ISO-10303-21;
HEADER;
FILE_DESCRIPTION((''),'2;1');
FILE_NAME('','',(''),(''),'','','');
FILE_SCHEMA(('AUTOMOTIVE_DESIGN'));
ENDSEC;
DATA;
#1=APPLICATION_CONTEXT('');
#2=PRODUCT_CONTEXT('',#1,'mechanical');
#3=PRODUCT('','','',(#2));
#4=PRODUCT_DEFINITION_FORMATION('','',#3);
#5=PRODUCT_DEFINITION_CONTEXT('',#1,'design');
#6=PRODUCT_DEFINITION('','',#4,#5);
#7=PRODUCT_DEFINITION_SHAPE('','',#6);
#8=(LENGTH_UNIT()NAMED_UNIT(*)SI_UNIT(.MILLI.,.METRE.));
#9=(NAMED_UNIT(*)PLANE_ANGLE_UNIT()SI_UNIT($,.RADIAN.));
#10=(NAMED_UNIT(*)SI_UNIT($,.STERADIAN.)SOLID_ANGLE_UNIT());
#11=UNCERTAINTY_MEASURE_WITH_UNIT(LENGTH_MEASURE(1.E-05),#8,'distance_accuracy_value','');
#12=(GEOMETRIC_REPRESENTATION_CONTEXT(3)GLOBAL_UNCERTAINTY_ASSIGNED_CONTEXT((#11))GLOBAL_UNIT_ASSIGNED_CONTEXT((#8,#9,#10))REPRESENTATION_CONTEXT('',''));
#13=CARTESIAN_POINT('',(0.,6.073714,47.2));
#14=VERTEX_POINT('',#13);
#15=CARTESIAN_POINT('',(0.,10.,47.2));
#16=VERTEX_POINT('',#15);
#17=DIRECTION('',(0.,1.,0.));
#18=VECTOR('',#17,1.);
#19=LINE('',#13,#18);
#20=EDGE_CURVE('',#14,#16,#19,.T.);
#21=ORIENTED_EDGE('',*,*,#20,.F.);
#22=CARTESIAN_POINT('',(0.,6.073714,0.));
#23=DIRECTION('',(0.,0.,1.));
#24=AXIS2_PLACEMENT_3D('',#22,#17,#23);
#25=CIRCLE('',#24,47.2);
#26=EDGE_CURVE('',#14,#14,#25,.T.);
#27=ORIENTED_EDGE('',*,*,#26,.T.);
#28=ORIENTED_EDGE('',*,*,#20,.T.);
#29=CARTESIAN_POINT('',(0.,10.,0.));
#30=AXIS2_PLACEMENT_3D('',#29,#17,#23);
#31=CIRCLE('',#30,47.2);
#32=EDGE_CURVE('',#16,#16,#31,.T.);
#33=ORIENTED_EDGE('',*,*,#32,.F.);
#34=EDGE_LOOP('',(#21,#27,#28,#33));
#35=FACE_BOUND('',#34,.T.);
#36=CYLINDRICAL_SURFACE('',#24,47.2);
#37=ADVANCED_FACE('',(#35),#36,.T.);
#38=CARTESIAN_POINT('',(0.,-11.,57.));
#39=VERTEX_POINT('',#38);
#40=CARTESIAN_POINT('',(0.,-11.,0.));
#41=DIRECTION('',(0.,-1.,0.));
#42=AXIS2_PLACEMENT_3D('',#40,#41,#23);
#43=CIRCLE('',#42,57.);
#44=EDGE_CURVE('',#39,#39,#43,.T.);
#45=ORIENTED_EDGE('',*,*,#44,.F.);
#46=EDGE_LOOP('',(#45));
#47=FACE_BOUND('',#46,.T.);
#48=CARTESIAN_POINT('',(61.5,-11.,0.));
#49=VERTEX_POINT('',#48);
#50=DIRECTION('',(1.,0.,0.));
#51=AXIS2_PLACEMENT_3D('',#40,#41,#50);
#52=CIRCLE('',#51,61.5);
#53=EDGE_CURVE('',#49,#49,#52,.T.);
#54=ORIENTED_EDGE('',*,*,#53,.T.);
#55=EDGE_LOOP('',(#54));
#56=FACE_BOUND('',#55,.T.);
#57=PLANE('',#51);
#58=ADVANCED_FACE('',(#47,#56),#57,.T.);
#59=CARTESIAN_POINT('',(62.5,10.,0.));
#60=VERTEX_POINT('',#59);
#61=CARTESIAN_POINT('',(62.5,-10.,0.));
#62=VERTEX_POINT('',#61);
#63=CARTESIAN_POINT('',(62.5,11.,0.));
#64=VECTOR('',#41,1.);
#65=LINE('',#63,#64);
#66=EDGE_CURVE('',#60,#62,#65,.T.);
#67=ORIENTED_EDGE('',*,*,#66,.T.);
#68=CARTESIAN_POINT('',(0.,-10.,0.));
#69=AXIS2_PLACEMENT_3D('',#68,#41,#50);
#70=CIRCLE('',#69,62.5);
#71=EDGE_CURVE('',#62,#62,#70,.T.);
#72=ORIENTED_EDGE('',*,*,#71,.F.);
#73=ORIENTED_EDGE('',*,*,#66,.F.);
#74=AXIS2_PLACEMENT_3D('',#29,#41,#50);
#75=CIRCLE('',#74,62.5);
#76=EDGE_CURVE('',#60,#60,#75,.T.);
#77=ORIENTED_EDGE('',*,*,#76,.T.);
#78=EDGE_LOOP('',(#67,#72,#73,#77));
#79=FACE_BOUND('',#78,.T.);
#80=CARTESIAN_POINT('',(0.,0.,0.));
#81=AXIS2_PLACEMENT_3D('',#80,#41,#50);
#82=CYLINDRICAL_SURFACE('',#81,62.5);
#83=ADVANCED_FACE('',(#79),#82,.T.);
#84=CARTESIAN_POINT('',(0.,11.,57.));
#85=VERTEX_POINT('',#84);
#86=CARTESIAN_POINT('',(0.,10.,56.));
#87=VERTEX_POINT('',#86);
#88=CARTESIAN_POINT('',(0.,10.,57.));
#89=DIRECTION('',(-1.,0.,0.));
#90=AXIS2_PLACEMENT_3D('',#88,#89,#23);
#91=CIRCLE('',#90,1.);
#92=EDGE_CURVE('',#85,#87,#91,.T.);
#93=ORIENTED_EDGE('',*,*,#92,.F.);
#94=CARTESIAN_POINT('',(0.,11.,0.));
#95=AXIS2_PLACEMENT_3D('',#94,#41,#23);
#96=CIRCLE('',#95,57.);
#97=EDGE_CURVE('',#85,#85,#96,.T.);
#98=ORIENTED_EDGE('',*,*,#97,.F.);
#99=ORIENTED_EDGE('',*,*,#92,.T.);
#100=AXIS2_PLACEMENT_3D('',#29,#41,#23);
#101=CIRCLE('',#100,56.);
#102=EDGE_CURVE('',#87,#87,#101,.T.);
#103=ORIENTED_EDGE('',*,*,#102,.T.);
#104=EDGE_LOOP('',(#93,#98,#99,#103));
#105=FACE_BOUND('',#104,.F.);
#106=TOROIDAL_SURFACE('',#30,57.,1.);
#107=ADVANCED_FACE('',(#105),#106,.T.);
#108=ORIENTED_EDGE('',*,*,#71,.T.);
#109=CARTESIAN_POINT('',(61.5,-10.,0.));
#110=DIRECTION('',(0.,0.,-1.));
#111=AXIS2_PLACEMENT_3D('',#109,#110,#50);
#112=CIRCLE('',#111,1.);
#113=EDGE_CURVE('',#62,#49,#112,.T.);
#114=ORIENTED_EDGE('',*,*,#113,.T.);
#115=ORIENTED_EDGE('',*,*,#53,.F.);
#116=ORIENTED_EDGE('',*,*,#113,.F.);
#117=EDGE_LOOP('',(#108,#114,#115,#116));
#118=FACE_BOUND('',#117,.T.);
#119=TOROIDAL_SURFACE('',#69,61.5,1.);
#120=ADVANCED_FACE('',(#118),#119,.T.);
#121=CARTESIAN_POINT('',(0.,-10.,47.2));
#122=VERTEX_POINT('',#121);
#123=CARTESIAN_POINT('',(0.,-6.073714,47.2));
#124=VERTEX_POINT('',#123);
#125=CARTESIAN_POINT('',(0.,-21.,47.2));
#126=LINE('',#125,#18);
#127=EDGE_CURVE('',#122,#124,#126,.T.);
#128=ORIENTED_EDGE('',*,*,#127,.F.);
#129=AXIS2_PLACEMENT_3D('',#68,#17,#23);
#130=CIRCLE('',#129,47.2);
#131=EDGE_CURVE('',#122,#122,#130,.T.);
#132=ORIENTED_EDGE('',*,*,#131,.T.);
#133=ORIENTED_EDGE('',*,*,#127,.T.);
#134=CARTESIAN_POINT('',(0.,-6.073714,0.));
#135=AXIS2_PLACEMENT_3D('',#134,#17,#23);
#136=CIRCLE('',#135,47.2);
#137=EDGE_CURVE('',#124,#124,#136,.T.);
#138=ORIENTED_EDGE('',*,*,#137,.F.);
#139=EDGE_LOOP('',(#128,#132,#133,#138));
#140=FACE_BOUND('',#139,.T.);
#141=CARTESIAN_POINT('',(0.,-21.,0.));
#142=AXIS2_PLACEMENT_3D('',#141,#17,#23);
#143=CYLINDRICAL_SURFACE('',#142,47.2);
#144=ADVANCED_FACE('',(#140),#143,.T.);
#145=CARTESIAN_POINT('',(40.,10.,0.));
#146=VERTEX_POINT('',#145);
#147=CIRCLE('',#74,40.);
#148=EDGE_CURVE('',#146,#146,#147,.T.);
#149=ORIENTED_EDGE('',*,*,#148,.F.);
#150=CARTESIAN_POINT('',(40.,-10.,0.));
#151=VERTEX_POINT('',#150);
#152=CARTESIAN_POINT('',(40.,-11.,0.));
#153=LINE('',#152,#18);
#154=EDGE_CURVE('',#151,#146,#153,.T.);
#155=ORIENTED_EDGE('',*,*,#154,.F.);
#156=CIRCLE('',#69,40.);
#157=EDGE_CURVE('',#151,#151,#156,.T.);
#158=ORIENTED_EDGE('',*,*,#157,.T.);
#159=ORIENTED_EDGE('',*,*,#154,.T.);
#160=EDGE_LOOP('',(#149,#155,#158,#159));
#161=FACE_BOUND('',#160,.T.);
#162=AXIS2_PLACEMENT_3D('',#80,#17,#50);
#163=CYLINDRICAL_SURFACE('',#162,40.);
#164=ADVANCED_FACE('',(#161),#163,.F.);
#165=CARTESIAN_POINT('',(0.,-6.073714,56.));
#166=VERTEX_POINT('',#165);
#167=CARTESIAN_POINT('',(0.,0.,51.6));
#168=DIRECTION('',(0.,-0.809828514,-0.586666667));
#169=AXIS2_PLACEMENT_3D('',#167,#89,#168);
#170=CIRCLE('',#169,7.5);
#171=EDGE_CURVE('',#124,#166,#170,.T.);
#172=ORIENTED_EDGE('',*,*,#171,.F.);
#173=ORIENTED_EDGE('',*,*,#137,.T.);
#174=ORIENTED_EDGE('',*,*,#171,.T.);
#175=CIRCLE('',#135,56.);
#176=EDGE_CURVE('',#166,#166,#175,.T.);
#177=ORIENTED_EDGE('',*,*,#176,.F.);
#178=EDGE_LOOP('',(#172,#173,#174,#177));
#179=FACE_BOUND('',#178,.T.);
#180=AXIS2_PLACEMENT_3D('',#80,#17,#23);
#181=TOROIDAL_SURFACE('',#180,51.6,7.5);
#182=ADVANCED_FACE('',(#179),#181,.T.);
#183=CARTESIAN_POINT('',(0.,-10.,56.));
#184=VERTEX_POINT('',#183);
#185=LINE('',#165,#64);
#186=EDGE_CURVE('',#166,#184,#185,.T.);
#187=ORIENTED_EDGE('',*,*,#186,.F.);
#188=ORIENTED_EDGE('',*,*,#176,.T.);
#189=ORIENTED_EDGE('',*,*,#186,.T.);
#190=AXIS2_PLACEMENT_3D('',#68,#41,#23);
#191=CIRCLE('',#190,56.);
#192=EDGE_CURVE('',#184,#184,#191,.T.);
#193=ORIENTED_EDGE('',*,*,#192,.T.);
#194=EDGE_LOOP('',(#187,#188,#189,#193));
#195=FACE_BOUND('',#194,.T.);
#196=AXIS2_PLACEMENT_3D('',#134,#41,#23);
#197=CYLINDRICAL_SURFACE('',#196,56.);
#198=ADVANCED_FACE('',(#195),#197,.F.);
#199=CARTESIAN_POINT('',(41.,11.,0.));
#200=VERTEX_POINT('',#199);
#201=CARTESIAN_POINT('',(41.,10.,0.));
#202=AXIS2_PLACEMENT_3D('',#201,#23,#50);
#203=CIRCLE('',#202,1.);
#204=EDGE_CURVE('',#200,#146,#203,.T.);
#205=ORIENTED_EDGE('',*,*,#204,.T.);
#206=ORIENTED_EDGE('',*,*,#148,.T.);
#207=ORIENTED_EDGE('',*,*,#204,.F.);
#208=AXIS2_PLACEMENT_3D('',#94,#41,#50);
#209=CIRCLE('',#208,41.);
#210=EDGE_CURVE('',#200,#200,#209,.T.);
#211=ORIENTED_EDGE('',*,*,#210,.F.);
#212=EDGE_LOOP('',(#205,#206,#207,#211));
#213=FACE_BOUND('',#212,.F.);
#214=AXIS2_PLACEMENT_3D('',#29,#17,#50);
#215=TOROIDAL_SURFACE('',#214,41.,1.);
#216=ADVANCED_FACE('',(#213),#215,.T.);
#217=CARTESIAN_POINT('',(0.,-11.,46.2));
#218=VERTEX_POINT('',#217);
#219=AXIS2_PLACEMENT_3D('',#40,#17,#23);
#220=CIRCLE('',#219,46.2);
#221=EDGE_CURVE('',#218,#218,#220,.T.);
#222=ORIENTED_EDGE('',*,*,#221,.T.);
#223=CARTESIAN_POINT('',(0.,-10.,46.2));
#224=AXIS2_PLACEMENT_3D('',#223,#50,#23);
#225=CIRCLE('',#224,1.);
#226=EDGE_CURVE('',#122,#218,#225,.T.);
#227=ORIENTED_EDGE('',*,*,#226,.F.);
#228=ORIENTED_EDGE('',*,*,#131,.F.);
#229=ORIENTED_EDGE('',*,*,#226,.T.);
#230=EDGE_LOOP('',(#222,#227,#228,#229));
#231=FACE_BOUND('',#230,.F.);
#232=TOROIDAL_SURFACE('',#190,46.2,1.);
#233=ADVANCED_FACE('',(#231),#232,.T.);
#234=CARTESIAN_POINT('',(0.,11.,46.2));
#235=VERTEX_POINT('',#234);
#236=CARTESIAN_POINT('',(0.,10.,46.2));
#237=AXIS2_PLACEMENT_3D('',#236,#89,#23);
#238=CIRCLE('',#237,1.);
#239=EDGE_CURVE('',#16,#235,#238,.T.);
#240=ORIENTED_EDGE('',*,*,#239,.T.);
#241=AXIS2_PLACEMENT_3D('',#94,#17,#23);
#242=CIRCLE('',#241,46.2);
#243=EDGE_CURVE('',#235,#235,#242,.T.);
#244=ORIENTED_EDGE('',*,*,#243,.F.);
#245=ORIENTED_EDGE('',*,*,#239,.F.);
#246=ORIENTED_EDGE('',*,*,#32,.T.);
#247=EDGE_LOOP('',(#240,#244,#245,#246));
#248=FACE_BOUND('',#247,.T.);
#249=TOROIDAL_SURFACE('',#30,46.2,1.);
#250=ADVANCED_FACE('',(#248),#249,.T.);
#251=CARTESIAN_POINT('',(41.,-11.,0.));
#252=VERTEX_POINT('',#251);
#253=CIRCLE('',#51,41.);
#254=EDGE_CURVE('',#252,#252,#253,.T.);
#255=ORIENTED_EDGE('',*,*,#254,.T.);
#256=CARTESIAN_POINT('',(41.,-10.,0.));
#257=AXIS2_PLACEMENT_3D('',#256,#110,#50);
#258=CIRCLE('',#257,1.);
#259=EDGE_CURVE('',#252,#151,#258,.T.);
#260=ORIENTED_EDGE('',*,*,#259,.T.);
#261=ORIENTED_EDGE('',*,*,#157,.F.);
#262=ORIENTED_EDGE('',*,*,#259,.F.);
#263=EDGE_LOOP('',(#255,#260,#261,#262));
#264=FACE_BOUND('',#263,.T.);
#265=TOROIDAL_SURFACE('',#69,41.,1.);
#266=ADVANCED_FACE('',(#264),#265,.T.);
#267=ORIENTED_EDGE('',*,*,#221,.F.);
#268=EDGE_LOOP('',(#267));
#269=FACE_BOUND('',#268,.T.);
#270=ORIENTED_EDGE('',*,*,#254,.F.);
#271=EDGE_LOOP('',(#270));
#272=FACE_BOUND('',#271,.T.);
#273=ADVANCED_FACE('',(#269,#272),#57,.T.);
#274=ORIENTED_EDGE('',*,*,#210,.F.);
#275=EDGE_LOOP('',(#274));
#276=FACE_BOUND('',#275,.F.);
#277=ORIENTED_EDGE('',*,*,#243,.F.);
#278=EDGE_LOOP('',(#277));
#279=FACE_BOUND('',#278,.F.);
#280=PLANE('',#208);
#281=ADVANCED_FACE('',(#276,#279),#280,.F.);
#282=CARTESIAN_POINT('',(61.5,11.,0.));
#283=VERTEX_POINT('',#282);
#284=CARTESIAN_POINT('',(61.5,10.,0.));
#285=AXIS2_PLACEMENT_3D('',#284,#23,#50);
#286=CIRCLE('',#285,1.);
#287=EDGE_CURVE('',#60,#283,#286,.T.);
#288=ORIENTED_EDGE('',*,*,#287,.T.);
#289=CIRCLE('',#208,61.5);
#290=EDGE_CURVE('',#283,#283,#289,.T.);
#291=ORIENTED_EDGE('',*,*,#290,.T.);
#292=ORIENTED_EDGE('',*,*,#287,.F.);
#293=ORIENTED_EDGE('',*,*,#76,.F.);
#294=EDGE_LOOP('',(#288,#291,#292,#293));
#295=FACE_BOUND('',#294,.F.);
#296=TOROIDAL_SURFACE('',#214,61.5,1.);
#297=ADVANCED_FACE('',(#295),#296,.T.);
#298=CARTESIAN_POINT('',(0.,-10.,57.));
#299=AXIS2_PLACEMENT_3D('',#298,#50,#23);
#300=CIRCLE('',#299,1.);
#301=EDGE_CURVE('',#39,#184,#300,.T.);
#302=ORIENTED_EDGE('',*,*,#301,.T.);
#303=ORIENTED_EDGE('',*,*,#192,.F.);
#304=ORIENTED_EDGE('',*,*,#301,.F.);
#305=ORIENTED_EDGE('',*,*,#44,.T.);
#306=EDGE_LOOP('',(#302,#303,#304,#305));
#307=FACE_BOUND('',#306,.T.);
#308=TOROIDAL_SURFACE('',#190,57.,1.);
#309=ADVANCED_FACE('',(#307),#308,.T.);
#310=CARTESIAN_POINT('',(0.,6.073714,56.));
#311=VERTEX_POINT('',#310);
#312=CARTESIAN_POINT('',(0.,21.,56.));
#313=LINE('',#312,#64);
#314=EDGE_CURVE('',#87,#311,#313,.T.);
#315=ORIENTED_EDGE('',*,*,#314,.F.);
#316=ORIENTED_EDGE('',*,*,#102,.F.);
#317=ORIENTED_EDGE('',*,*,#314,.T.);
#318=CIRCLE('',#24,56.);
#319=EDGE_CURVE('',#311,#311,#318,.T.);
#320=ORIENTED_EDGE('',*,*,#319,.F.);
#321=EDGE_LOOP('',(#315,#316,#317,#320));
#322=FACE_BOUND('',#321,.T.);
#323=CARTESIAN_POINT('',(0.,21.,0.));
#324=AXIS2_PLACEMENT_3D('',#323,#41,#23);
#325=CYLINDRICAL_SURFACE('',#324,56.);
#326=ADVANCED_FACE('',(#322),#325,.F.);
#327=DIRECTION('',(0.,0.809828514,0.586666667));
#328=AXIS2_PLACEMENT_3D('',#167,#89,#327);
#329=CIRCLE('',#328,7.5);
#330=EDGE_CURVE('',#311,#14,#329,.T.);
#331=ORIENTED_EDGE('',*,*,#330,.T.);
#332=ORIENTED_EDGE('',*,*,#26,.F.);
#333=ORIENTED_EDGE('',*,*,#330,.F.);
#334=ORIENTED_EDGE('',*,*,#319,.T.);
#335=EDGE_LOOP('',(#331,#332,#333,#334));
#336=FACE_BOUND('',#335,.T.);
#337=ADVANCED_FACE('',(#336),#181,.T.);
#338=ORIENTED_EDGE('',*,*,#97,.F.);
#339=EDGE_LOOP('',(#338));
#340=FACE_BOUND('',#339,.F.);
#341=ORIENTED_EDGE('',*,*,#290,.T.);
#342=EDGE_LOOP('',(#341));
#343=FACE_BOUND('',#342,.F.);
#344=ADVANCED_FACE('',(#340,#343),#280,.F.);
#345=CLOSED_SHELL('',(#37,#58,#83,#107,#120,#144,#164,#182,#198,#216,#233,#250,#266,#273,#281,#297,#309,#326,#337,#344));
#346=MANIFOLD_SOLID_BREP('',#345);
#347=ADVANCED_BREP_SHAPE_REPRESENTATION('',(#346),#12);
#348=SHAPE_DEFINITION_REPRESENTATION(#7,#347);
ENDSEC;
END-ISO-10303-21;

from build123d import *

# Parameters (mm, degrees)
F0_R     = 62.5
F0_R_2   = 40
F1_DEPTH = 11
F4_R     = 1


# Not quite as in the source:
# - a feature names something its author has since deleted; it is built from what else it names


with BuildPart() as f1:
    # F0 (on Front) → F1 (new body, symmetric)
    with BuildSketch(Plane.XZ):
        Circle(F0_R)
        Circle(F0_R_2, mode=Mode.SUBTRACT)
    extrude(amount=F1_DEPTH, both=True)

    # F2 (on Right) → F3 (revolve, cut)
    with BuildSketch(Plane.YZ):
        with BuildLine():
            Line((-6.0737138556, 56), (-21, 56))
            Line((-21, 56), (-21, 47.2))
            Line((-21, 47.2), (-6.0737138556, 47.2))
            ThreePointArc((-6.0737138556, 47.2), (-7.5, 51.6), (-6.0737138556, 56))
        make_face()
        with BuildLine():
            Line((21, 47.2), (21, 56))
            Line((21, 56), (6.0737138556, 56))
            ThreePointArc((6.0737138556, 56), (7.5, 51.6), (6.0737138556, 47.2))
            Line((6.0737138556, 47.2), (21, 47.2))
        make_face()
    revolve(axis=Axis((0, 16.4881043163, 0), (0, 1, 0)), mode=Mode.SUBTRACT)

    # F4
    f4_edges = [f1.edges().sort_by_distance(p)[0] for p in [
        (-62.5, 11, 0),
        (-62.5, -11, 0),
        (-40, 11, 0),
        (-40, -11, 0),
        (0, -11, -56),
        (0, -11, -47.2),
        (0, 11, -56),
        (0, 11, -47.2),
    ]]
    fillet(f4_edges, radius=F4_R)


solid = f1.part
